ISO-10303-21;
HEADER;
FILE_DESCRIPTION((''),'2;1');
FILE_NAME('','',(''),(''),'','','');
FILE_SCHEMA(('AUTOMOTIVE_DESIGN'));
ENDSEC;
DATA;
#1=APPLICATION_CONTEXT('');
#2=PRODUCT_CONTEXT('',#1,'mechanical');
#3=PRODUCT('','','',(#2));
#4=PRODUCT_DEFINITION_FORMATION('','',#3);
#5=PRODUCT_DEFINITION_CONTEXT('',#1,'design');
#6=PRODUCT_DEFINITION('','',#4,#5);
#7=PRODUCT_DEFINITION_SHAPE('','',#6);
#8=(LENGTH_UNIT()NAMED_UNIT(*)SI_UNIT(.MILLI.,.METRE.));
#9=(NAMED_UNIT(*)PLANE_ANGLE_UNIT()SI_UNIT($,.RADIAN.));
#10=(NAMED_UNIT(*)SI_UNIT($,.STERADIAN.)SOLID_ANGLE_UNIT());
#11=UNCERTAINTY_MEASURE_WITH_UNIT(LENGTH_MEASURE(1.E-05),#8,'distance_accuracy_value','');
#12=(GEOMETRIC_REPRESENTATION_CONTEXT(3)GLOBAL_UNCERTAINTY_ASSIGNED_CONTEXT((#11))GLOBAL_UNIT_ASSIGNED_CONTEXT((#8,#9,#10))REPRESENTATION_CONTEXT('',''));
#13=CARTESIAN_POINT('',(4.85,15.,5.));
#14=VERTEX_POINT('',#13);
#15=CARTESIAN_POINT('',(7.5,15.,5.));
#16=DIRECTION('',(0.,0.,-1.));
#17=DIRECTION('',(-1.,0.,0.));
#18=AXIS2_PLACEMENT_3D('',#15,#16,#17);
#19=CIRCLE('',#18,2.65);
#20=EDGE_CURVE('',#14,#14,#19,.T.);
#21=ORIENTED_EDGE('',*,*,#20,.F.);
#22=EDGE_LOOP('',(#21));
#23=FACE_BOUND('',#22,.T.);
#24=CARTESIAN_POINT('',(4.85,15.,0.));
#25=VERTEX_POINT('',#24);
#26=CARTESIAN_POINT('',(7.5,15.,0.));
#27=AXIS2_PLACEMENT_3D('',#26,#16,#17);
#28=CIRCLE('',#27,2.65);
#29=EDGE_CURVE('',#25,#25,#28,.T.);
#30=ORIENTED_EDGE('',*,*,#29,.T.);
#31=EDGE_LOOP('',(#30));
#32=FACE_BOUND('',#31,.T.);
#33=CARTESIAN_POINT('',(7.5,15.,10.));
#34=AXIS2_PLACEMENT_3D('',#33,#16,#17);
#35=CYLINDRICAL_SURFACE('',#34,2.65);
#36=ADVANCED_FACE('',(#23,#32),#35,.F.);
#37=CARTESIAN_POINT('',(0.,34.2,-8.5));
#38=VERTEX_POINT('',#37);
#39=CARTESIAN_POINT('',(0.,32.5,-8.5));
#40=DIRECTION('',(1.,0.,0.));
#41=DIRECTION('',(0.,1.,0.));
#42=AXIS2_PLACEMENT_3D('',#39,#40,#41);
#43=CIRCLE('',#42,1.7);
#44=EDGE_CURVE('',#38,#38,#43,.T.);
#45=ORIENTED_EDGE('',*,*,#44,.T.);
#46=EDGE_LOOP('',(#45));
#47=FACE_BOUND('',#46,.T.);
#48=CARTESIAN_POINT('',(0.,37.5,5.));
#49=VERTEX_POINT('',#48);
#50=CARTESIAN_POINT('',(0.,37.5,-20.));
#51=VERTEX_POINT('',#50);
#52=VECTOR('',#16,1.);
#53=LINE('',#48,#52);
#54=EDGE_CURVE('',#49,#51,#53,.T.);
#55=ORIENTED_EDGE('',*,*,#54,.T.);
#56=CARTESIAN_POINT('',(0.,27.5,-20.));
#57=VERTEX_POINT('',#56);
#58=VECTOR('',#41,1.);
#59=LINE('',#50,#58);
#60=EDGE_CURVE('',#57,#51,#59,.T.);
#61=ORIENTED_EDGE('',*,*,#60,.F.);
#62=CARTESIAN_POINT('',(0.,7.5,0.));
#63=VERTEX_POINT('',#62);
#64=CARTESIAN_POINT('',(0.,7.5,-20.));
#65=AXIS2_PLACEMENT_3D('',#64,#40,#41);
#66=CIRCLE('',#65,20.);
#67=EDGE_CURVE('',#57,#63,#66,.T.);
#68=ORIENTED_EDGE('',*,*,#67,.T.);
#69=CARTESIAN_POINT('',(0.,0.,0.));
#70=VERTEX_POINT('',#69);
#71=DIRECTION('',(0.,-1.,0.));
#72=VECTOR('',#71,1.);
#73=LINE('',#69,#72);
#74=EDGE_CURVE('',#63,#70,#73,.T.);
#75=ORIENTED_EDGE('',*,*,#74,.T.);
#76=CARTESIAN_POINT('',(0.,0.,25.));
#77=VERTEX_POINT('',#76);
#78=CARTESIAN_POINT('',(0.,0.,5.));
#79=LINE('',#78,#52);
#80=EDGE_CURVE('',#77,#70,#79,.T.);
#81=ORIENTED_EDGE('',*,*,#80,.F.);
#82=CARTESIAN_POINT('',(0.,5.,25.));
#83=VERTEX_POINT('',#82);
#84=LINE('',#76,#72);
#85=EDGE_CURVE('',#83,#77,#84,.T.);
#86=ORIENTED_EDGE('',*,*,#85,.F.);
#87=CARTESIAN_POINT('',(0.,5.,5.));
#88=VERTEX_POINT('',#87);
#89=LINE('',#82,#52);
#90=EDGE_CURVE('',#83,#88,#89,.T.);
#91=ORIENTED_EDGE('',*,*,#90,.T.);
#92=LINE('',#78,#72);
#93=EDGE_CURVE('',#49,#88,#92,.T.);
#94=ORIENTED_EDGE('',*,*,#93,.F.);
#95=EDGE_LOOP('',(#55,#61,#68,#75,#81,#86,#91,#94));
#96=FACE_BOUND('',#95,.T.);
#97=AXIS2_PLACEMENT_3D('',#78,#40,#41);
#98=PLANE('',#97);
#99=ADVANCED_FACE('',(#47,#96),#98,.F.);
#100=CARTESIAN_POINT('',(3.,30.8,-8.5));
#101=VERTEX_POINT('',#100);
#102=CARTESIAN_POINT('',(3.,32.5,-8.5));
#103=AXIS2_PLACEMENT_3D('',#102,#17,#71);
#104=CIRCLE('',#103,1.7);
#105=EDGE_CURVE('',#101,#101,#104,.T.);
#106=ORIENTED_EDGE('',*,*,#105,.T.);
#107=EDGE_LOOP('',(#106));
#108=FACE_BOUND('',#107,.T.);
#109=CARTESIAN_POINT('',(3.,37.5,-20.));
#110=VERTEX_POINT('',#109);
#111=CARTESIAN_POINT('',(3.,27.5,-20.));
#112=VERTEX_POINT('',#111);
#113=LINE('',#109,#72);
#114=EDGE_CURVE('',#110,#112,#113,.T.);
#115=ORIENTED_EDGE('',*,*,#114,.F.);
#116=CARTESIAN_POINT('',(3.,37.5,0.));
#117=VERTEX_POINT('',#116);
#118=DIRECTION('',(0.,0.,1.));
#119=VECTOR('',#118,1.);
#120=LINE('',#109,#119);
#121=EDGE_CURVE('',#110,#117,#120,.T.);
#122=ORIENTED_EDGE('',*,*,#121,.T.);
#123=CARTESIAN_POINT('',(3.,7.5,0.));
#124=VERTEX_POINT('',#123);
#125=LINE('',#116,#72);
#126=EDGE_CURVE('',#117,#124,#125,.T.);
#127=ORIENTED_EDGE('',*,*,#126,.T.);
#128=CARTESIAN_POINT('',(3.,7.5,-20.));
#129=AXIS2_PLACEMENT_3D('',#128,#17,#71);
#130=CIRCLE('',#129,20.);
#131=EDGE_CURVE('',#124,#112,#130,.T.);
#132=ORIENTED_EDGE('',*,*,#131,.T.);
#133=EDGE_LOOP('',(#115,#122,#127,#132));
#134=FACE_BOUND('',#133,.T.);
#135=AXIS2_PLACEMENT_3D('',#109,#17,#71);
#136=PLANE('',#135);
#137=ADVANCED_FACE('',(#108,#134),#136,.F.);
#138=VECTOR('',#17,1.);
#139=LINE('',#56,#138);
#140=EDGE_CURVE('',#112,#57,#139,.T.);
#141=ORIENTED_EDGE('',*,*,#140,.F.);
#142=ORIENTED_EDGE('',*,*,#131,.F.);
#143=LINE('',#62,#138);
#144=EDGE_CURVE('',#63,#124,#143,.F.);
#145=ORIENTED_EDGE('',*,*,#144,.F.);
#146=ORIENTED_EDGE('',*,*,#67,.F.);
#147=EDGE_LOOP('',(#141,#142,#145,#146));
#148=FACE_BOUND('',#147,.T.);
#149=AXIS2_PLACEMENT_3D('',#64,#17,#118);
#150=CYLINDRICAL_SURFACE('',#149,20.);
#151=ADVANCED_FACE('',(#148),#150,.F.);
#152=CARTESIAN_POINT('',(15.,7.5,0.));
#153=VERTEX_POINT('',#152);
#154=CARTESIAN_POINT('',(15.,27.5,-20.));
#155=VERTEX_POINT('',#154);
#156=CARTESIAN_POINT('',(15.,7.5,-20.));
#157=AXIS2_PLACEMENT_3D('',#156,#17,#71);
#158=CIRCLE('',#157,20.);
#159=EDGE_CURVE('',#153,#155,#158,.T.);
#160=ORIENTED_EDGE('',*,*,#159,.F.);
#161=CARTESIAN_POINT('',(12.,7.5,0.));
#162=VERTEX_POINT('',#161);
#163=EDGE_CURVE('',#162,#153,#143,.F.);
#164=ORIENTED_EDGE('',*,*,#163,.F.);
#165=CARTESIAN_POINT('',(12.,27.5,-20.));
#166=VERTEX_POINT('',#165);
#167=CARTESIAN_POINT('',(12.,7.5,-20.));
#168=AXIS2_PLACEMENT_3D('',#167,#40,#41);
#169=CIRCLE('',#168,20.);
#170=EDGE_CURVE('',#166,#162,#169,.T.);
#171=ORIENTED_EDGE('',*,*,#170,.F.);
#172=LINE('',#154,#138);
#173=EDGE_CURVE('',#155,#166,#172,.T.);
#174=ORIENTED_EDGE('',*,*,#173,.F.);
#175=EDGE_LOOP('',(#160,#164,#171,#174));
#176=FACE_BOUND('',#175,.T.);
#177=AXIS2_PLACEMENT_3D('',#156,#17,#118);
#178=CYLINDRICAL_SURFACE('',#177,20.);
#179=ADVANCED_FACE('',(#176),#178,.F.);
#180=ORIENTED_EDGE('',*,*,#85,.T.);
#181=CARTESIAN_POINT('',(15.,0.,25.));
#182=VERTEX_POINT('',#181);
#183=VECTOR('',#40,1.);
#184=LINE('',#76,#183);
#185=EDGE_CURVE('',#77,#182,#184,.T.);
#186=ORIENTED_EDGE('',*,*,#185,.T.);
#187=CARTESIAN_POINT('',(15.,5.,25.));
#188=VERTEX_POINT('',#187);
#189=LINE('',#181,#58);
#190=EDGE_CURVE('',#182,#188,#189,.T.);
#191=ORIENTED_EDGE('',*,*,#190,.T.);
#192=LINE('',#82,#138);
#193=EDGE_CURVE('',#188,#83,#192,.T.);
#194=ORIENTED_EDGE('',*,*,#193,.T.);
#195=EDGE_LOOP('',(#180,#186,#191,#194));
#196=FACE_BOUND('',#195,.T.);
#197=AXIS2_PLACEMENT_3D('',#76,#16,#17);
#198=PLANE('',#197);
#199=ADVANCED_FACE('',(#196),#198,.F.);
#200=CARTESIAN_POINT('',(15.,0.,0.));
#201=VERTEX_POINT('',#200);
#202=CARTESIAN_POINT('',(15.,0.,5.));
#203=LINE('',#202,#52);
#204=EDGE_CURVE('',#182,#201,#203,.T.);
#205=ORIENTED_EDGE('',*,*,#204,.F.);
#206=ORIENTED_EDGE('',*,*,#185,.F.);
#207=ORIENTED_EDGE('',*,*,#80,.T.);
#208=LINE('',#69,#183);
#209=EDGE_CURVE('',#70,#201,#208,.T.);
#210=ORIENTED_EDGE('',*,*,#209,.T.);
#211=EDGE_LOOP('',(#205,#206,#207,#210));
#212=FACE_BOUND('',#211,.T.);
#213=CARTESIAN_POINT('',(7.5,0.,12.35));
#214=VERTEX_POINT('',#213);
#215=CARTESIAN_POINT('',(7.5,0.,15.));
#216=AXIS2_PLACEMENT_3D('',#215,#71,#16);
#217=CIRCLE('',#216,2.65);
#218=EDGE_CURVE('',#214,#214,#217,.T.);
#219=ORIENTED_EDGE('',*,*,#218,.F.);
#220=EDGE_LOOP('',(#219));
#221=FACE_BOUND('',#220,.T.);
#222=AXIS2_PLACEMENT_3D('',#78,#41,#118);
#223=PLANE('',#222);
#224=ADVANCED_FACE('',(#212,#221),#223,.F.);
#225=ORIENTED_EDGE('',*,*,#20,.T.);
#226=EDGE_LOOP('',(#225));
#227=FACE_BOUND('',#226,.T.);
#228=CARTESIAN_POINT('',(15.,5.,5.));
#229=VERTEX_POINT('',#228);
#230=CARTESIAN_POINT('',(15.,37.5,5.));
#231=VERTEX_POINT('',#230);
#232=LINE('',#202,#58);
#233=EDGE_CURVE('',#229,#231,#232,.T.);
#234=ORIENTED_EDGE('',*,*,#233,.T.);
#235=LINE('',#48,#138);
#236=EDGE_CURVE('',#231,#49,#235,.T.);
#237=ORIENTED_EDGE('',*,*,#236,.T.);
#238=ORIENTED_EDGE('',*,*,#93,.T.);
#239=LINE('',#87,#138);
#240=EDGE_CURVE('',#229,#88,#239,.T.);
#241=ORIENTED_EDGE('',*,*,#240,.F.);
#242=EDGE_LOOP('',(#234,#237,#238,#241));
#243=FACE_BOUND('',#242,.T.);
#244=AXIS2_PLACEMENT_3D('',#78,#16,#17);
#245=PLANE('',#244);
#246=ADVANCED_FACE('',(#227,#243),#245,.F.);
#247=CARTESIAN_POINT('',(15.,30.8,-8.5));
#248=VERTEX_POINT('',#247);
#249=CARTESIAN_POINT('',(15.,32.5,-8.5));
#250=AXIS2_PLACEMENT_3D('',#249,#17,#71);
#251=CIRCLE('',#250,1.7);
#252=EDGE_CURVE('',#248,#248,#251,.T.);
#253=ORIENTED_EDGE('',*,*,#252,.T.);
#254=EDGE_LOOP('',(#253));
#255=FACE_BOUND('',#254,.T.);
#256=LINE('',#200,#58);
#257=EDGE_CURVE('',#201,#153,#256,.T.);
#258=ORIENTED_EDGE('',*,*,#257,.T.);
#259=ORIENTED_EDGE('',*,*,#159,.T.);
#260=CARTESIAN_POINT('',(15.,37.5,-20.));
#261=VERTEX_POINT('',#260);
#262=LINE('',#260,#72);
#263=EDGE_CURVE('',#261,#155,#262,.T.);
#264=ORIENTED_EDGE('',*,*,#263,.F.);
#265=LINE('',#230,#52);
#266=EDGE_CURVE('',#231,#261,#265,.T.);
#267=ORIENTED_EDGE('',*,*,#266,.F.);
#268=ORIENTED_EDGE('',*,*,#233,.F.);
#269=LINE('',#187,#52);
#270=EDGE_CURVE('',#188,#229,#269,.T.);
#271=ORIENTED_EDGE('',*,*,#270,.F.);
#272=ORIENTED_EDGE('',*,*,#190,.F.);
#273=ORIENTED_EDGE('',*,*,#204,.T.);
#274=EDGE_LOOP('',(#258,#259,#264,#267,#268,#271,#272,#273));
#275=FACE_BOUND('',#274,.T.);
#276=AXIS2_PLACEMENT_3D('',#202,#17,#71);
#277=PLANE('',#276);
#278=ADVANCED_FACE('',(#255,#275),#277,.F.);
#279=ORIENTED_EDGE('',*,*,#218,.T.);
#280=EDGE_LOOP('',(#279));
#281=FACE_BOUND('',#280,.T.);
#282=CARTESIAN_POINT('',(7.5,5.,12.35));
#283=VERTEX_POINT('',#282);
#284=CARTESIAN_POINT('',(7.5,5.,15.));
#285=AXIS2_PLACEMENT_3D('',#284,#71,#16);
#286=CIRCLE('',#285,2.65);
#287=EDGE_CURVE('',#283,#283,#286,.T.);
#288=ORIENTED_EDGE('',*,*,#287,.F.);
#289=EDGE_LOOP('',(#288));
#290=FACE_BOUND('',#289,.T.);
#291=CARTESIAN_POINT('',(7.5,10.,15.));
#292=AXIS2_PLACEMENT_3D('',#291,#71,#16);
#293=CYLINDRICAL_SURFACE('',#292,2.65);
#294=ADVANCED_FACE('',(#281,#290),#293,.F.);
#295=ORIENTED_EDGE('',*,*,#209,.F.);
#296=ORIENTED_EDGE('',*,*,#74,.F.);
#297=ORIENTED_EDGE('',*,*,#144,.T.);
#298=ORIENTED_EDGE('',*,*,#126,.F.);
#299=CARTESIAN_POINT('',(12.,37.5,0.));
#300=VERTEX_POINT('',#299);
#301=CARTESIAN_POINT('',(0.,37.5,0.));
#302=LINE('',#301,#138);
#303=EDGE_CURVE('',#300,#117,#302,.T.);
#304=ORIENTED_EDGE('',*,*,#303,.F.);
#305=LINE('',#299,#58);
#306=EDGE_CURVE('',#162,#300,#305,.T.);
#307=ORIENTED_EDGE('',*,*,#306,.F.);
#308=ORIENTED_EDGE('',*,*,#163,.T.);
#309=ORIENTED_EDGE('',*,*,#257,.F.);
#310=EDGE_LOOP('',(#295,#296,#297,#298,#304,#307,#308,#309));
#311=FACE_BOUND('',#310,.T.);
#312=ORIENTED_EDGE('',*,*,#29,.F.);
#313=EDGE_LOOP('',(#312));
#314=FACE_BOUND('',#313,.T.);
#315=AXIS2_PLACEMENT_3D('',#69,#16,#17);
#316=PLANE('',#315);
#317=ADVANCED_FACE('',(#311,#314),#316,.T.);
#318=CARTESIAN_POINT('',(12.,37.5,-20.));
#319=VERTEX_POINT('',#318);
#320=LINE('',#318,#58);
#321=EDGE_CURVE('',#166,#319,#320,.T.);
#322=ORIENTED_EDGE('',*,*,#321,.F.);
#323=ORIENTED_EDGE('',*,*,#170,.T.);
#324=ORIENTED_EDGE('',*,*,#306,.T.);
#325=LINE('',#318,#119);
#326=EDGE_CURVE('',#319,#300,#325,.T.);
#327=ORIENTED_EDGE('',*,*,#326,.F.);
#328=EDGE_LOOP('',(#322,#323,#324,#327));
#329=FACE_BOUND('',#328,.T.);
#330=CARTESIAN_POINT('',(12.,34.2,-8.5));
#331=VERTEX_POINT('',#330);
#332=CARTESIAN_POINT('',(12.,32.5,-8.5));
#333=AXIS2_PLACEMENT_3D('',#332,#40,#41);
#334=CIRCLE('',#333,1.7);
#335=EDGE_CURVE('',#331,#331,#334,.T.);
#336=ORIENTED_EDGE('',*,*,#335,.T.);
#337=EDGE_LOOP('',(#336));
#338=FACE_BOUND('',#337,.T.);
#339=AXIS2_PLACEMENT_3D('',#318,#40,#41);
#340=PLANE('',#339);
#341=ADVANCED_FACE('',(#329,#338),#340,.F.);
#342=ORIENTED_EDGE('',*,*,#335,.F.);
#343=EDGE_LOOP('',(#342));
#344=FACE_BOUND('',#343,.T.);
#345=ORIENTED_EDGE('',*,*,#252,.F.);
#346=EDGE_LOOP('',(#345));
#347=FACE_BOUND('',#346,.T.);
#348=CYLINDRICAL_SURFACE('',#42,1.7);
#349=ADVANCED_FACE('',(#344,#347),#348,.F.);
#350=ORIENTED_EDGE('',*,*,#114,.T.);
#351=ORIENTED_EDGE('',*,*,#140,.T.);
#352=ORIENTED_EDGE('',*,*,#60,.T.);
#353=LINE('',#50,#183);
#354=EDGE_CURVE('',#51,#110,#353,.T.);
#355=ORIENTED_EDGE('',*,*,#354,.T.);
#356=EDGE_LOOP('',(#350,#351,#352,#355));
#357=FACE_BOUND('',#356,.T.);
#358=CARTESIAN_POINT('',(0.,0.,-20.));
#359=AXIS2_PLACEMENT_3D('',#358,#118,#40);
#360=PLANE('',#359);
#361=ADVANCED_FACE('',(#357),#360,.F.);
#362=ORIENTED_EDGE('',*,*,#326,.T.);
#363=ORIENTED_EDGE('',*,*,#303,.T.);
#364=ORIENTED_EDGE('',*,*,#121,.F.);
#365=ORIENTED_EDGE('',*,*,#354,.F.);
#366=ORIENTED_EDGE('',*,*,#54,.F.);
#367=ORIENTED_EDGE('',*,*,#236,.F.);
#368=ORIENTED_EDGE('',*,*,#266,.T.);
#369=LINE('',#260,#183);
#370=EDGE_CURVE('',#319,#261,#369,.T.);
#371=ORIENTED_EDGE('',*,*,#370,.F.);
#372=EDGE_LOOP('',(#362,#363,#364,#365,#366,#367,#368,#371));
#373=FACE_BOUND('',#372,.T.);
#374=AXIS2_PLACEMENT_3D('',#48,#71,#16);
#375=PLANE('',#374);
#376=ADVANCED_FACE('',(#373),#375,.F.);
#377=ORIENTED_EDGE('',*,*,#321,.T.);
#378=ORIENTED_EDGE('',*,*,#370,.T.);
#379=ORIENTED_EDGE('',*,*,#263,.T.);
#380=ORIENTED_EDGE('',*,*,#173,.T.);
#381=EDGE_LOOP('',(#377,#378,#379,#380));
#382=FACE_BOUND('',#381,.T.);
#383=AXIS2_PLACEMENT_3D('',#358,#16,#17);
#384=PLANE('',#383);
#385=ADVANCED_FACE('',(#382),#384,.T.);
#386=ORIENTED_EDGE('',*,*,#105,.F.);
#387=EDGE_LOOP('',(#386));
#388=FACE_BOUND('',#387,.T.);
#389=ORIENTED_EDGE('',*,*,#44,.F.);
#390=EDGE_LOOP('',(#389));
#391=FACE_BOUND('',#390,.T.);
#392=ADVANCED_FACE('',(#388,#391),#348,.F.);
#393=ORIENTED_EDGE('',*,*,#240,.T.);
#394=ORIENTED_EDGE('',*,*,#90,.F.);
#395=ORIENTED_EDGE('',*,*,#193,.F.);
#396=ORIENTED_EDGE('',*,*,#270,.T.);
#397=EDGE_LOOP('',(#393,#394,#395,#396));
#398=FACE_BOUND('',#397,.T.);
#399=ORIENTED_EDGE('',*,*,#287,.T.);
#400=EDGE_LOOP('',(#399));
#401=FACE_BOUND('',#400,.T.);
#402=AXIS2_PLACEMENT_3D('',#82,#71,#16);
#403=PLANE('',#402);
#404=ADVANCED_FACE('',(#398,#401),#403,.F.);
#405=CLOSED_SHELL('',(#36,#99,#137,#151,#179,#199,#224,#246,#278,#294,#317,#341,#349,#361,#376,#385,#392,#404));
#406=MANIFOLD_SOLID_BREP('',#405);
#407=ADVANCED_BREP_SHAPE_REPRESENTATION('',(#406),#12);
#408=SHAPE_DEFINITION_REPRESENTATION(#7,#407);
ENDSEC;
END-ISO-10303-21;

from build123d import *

# Parameters (mm, degrees)
SKETCH2_W               = 15
SKETCH2_H               = 37.5
BOSS_EXTRUDE1_DEPTH     = 5
SKETCH3_W               = 15
SKETCH3_H               = 5
BOSS_EXTRUDE2_DEPTH     = 20
SKETCH4_W               = 3
SKETCH4_H               = 10
BOSS_EXTRUDE3_DEPTH     = 20
CUT_EXTRUDE1_DEPTH      = 48.5
CUT_EXTRUDE1_DEPTH_BACK = 48.5
SKETCH5_R               = 1.7
FILLET1_R               = 20
SKETCH6_R               = 2.65
CUT_EXTRUDE2_DEPTH      = 10
SKETCH7_R               = 2.65
CUT_EXTRUDE3_DEPTH      = 10


with BuildPart() as part:
    # Sketch2 → Boss-Extrude1 (new body)
    with BuildSketch(Plane.XY):
        with Locations((7.5, 18.75)):
            Rectangle(SKETCH2_W, SKETCH2_H)
    extrude(amount=BOSS_EXTRUDE1_DEPTH)

    # Sketch3 → Boss-Extrude2 (add)
    with BuildSketch(Plane.XY.offset(5)):
        with Locations((7.5, 2.5)):
            Rectangle(SKETCH3_W, SKETCH3_H)
    extrude(amount=BOSS_EXTRUDE2_DEPTH)

    # Sketch4 → Boss-Extrude3 (add)
    with BuildSketch(Plane(origin=(0, 0, 0), x_dir=(-1, 0, 0), z_dir=(0, 0, -1))):
        with Locations((-13.5, 32.5)):
            Rectangle(SKETCH4_W, SKETCH4_H)
        with Locations((-1.5, 32.5)):
            Rectangle(SKETCH4_W, SKETCH4_H)
    extrude(amount=BOSS_EXTRUDE3_DEPTH)

    # Sketch5 → Cut-Extrude1 (cut, two sides: drawn at the far end of the back side and taken through both)
    with BuildSketch(Plane(origin=(15, 0, 0), x_dir=(0, 0, -1), z_dir=(1, 0, 0)).offset(-CUT_EXTRUDE1_DEPTH_BACK)):
        with Locations(Location((8.5, 32.5, 0), (0, 0, 90))):
            Circle(SKETCH5_R)
    extrude(amount=CUT_EXTRUDE1_DEPTH + CUT_EXTRUDE1_DEPTH_BACK, mode=Mode.SUBTRACT)

    # Fillet1
    fillet1_edges = [part.edges().sort_by_distance(p)[0] for p in [
        (1.5, 27.5, 0),
        (13.5, 27.5, 0),
    ]]
    fillet(fillet1_edges, radius=FILLET1_R - 0.0001)  # a hair under: the kernel refuses the full size

    # Sketch6 → Cut-Extrude2 (cut)
    with BuildSketch(Plane.XZ):
        with Locations(Location((7.5, 15, 0), (0, 0, 270))):
            Circle(SKETCH6_R)
    extrude(amount=-CUT_EXTRUDE2_DEPTH, mode=Mode.SUBTRACT)

    # Sketch7 → Cut-Extrude3 (cut)
    with BuildSketch(Plane(origin=(0, 0, 0), x_dir=(-1, 0, 0), z_dir=(0, 0, -1))):
        with Locations((-7.5, 15)):
            Circle(SKETCH7_R)
    extrude(amount=-CUT_EXTRUDE3_DEPTH, mode=Mode.SUBTRACT)


solid = part.part
